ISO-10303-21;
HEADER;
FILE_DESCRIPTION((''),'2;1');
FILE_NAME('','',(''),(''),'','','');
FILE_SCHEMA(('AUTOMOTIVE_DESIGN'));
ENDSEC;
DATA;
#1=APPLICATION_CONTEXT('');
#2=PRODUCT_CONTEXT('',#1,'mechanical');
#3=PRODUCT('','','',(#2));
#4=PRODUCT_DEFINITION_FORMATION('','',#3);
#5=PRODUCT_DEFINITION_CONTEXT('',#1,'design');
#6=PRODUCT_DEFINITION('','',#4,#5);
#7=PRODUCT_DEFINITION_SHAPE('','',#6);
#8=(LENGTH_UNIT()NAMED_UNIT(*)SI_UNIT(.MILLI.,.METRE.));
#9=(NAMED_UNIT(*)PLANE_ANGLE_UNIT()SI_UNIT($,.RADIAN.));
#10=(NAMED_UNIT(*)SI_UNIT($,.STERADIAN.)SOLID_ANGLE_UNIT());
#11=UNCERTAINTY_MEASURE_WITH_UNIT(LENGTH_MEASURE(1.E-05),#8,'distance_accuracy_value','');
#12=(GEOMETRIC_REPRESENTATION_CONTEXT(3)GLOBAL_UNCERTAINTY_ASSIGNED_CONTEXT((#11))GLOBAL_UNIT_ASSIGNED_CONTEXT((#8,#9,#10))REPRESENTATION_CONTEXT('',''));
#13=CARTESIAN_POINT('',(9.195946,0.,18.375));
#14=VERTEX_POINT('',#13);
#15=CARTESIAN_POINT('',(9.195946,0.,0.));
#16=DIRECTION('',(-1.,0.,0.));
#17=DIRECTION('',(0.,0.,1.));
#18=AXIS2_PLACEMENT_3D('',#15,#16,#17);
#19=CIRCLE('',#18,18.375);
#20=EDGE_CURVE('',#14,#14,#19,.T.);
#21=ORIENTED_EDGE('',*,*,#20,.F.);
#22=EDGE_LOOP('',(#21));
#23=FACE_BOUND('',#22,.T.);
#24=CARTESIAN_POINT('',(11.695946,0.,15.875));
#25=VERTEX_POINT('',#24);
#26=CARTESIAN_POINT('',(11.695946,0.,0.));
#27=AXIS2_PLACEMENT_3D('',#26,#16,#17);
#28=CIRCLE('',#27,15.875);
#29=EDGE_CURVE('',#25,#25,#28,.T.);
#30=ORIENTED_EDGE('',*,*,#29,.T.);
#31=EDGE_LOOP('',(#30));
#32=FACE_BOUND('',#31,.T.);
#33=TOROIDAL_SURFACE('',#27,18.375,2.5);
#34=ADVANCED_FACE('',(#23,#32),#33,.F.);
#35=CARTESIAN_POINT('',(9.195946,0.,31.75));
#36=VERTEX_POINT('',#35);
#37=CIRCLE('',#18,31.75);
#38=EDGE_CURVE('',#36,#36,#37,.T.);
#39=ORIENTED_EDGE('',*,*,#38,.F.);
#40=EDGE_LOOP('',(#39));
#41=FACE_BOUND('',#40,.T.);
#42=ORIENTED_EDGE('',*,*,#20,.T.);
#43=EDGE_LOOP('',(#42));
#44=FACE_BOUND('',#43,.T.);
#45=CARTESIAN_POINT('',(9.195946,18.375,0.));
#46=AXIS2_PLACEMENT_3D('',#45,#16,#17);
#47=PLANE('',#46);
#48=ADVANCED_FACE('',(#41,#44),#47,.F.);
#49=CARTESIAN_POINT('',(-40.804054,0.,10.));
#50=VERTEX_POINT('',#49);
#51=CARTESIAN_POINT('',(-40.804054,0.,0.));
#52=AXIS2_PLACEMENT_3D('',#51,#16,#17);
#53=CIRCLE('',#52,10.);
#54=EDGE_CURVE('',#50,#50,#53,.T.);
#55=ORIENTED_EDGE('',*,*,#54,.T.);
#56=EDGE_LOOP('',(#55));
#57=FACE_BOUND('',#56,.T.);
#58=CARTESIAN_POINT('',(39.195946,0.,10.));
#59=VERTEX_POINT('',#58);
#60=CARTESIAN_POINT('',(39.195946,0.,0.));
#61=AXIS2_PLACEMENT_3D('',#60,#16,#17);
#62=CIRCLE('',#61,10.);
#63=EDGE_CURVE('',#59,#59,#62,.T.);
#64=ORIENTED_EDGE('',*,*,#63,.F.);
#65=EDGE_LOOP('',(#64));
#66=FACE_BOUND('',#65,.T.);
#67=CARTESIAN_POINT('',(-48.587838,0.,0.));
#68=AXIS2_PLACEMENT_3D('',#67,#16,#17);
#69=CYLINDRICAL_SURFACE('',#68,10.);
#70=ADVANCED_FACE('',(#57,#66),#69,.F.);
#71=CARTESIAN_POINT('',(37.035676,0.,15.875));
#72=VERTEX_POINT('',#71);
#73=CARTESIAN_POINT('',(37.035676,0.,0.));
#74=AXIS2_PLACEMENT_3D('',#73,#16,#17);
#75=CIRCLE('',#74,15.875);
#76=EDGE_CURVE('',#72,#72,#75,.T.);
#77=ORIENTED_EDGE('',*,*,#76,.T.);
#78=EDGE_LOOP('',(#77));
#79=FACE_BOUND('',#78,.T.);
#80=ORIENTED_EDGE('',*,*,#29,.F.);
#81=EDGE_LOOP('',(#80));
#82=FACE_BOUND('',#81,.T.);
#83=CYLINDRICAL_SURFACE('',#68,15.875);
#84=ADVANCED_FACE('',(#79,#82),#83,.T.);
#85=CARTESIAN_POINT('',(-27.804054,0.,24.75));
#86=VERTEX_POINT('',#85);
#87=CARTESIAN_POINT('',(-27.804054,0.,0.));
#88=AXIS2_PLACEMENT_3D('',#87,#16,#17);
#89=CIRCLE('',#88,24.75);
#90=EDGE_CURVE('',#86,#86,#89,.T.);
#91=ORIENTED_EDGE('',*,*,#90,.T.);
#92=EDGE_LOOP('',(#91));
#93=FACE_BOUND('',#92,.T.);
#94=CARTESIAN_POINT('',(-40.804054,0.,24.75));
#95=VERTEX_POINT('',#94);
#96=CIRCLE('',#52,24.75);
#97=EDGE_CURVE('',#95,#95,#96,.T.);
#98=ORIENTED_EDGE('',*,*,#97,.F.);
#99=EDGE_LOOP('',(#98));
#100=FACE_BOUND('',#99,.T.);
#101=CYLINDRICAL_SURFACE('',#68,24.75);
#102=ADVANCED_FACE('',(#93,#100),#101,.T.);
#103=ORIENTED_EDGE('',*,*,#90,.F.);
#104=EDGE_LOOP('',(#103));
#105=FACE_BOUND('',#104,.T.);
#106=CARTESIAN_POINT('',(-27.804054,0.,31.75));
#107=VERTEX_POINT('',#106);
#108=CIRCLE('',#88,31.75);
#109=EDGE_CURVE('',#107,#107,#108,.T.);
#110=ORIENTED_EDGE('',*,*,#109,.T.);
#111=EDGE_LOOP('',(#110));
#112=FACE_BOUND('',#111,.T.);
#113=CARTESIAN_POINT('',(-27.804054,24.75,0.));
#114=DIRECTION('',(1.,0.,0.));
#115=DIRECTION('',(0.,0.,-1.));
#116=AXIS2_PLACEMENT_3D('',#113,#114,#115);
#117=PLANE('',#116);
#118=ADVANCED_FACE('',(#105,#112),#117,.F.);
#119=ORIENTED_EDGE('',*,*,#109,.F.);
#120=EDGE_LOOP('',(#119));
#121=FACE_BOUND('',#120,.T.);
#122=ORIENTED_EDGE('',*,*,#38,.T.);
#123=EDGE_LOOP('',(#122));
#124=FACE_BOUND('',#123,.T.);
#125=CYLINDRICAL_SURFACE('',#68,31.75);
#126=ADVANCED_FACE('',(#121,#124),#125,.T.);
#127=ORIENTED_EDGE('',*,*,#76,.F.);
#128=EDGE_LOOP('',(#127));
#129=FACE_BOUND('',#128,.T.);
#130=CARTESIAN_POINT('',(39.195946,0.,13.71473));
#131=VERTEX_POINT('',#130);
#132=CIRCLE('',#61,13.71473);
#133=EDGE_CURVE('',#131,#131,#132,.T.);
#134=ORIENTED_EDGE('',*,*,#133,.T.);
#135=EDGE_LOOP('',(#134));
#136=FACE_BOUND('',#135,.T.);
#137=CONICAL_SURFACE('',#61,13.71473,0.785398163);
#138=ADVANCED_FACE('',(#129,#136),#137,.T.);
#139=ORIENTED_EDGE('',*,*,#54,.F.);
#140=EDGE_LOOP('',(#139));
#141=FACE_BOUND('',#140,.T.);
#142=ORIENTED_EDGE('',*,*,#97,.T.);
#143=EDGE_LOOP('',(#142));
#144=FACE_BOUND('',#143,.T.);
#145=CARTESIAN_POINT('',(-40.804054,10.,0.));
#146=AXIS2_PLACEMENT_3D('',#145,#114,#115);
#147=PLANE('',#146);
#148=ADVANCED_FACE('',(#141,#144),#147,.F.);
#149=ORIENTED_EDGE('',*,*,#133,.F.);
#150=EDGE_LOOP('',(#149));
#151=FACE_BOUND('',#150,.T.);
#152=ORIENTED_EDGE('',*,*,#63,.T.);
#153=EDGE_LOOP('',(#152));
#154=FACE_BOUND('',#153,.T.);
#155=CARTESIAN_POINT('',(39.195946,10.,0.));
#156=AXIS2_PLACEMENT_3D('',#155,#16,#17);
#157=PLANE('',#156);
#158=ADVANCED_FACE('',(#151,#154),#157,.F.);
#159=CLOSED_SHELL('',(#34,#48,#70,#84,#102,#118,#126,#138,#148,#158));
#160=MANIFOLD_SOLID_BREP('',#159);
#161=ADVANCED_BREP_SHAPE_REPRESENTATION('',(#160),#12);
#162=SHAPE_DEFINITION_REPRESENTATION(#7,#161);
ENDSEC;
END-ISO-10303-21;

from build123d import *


# Read off the part's stored shape, not the designer's step: 1-1/4-7 Machine Threads Stud1
with BuildPart() as part:
    # Sketch1 → Revolve1 (revolve)
    with BuildSketch(Plane.XY, mode=Mode.PRIVATE) as revolve1_sk:
        with BuildLine():
            Line((-40.804054054, 10), (-27.804054054, 10))
            Line((-27.804054054, 10), (9.195945946, 10))
            Line((9.195945946, 10), (39.195945946, 10))
            Line((39.195945946, 10), (39.195945946, 15.875))
            Line((39.195945946, 15.875), (11.695945946, 15.875))
            ThreePointArc((11.695945946, 15.875), (9.928178993, 16.607233047), (9.195945946, 18.375))
            Line((9.195945946, 18.375), (9.195945946, 31.75))
            Line((9.195945946, 31.75), (-27.804054054, 31.75))
            Line((-27.804054054, 31.75), (-27.804054054, 24.75))
            Line((-27.804054054, 24.75), (-40.804054054, 24.75))
            Line((-40.804054054, 24.75), (-40.804054054, 10))
        make_face()
    revolve(revolve1_sk.sketch.rotate(Axis((-48.587837838, 0, 0), (1, 0, 0)), 90), axis=Axis((-48.587837838, 0, 0), (1, 0, 0)))

    # 1-1/4-7 Machine Threads Stud1 outline → 1-1/4-7 Machine Threads Stud1 (revolve, cut)
    with BuildSketch(Plane.YX):
        Polygon((15.875, 39.195945946), (13.71473, 39.195945946), (15.875, 37.035675946), align=None)
    revolve(axis=Axis((0, 0, 0), (1, 0, 0)), mode=Mode.SUBTRACT)


solid = part.part
